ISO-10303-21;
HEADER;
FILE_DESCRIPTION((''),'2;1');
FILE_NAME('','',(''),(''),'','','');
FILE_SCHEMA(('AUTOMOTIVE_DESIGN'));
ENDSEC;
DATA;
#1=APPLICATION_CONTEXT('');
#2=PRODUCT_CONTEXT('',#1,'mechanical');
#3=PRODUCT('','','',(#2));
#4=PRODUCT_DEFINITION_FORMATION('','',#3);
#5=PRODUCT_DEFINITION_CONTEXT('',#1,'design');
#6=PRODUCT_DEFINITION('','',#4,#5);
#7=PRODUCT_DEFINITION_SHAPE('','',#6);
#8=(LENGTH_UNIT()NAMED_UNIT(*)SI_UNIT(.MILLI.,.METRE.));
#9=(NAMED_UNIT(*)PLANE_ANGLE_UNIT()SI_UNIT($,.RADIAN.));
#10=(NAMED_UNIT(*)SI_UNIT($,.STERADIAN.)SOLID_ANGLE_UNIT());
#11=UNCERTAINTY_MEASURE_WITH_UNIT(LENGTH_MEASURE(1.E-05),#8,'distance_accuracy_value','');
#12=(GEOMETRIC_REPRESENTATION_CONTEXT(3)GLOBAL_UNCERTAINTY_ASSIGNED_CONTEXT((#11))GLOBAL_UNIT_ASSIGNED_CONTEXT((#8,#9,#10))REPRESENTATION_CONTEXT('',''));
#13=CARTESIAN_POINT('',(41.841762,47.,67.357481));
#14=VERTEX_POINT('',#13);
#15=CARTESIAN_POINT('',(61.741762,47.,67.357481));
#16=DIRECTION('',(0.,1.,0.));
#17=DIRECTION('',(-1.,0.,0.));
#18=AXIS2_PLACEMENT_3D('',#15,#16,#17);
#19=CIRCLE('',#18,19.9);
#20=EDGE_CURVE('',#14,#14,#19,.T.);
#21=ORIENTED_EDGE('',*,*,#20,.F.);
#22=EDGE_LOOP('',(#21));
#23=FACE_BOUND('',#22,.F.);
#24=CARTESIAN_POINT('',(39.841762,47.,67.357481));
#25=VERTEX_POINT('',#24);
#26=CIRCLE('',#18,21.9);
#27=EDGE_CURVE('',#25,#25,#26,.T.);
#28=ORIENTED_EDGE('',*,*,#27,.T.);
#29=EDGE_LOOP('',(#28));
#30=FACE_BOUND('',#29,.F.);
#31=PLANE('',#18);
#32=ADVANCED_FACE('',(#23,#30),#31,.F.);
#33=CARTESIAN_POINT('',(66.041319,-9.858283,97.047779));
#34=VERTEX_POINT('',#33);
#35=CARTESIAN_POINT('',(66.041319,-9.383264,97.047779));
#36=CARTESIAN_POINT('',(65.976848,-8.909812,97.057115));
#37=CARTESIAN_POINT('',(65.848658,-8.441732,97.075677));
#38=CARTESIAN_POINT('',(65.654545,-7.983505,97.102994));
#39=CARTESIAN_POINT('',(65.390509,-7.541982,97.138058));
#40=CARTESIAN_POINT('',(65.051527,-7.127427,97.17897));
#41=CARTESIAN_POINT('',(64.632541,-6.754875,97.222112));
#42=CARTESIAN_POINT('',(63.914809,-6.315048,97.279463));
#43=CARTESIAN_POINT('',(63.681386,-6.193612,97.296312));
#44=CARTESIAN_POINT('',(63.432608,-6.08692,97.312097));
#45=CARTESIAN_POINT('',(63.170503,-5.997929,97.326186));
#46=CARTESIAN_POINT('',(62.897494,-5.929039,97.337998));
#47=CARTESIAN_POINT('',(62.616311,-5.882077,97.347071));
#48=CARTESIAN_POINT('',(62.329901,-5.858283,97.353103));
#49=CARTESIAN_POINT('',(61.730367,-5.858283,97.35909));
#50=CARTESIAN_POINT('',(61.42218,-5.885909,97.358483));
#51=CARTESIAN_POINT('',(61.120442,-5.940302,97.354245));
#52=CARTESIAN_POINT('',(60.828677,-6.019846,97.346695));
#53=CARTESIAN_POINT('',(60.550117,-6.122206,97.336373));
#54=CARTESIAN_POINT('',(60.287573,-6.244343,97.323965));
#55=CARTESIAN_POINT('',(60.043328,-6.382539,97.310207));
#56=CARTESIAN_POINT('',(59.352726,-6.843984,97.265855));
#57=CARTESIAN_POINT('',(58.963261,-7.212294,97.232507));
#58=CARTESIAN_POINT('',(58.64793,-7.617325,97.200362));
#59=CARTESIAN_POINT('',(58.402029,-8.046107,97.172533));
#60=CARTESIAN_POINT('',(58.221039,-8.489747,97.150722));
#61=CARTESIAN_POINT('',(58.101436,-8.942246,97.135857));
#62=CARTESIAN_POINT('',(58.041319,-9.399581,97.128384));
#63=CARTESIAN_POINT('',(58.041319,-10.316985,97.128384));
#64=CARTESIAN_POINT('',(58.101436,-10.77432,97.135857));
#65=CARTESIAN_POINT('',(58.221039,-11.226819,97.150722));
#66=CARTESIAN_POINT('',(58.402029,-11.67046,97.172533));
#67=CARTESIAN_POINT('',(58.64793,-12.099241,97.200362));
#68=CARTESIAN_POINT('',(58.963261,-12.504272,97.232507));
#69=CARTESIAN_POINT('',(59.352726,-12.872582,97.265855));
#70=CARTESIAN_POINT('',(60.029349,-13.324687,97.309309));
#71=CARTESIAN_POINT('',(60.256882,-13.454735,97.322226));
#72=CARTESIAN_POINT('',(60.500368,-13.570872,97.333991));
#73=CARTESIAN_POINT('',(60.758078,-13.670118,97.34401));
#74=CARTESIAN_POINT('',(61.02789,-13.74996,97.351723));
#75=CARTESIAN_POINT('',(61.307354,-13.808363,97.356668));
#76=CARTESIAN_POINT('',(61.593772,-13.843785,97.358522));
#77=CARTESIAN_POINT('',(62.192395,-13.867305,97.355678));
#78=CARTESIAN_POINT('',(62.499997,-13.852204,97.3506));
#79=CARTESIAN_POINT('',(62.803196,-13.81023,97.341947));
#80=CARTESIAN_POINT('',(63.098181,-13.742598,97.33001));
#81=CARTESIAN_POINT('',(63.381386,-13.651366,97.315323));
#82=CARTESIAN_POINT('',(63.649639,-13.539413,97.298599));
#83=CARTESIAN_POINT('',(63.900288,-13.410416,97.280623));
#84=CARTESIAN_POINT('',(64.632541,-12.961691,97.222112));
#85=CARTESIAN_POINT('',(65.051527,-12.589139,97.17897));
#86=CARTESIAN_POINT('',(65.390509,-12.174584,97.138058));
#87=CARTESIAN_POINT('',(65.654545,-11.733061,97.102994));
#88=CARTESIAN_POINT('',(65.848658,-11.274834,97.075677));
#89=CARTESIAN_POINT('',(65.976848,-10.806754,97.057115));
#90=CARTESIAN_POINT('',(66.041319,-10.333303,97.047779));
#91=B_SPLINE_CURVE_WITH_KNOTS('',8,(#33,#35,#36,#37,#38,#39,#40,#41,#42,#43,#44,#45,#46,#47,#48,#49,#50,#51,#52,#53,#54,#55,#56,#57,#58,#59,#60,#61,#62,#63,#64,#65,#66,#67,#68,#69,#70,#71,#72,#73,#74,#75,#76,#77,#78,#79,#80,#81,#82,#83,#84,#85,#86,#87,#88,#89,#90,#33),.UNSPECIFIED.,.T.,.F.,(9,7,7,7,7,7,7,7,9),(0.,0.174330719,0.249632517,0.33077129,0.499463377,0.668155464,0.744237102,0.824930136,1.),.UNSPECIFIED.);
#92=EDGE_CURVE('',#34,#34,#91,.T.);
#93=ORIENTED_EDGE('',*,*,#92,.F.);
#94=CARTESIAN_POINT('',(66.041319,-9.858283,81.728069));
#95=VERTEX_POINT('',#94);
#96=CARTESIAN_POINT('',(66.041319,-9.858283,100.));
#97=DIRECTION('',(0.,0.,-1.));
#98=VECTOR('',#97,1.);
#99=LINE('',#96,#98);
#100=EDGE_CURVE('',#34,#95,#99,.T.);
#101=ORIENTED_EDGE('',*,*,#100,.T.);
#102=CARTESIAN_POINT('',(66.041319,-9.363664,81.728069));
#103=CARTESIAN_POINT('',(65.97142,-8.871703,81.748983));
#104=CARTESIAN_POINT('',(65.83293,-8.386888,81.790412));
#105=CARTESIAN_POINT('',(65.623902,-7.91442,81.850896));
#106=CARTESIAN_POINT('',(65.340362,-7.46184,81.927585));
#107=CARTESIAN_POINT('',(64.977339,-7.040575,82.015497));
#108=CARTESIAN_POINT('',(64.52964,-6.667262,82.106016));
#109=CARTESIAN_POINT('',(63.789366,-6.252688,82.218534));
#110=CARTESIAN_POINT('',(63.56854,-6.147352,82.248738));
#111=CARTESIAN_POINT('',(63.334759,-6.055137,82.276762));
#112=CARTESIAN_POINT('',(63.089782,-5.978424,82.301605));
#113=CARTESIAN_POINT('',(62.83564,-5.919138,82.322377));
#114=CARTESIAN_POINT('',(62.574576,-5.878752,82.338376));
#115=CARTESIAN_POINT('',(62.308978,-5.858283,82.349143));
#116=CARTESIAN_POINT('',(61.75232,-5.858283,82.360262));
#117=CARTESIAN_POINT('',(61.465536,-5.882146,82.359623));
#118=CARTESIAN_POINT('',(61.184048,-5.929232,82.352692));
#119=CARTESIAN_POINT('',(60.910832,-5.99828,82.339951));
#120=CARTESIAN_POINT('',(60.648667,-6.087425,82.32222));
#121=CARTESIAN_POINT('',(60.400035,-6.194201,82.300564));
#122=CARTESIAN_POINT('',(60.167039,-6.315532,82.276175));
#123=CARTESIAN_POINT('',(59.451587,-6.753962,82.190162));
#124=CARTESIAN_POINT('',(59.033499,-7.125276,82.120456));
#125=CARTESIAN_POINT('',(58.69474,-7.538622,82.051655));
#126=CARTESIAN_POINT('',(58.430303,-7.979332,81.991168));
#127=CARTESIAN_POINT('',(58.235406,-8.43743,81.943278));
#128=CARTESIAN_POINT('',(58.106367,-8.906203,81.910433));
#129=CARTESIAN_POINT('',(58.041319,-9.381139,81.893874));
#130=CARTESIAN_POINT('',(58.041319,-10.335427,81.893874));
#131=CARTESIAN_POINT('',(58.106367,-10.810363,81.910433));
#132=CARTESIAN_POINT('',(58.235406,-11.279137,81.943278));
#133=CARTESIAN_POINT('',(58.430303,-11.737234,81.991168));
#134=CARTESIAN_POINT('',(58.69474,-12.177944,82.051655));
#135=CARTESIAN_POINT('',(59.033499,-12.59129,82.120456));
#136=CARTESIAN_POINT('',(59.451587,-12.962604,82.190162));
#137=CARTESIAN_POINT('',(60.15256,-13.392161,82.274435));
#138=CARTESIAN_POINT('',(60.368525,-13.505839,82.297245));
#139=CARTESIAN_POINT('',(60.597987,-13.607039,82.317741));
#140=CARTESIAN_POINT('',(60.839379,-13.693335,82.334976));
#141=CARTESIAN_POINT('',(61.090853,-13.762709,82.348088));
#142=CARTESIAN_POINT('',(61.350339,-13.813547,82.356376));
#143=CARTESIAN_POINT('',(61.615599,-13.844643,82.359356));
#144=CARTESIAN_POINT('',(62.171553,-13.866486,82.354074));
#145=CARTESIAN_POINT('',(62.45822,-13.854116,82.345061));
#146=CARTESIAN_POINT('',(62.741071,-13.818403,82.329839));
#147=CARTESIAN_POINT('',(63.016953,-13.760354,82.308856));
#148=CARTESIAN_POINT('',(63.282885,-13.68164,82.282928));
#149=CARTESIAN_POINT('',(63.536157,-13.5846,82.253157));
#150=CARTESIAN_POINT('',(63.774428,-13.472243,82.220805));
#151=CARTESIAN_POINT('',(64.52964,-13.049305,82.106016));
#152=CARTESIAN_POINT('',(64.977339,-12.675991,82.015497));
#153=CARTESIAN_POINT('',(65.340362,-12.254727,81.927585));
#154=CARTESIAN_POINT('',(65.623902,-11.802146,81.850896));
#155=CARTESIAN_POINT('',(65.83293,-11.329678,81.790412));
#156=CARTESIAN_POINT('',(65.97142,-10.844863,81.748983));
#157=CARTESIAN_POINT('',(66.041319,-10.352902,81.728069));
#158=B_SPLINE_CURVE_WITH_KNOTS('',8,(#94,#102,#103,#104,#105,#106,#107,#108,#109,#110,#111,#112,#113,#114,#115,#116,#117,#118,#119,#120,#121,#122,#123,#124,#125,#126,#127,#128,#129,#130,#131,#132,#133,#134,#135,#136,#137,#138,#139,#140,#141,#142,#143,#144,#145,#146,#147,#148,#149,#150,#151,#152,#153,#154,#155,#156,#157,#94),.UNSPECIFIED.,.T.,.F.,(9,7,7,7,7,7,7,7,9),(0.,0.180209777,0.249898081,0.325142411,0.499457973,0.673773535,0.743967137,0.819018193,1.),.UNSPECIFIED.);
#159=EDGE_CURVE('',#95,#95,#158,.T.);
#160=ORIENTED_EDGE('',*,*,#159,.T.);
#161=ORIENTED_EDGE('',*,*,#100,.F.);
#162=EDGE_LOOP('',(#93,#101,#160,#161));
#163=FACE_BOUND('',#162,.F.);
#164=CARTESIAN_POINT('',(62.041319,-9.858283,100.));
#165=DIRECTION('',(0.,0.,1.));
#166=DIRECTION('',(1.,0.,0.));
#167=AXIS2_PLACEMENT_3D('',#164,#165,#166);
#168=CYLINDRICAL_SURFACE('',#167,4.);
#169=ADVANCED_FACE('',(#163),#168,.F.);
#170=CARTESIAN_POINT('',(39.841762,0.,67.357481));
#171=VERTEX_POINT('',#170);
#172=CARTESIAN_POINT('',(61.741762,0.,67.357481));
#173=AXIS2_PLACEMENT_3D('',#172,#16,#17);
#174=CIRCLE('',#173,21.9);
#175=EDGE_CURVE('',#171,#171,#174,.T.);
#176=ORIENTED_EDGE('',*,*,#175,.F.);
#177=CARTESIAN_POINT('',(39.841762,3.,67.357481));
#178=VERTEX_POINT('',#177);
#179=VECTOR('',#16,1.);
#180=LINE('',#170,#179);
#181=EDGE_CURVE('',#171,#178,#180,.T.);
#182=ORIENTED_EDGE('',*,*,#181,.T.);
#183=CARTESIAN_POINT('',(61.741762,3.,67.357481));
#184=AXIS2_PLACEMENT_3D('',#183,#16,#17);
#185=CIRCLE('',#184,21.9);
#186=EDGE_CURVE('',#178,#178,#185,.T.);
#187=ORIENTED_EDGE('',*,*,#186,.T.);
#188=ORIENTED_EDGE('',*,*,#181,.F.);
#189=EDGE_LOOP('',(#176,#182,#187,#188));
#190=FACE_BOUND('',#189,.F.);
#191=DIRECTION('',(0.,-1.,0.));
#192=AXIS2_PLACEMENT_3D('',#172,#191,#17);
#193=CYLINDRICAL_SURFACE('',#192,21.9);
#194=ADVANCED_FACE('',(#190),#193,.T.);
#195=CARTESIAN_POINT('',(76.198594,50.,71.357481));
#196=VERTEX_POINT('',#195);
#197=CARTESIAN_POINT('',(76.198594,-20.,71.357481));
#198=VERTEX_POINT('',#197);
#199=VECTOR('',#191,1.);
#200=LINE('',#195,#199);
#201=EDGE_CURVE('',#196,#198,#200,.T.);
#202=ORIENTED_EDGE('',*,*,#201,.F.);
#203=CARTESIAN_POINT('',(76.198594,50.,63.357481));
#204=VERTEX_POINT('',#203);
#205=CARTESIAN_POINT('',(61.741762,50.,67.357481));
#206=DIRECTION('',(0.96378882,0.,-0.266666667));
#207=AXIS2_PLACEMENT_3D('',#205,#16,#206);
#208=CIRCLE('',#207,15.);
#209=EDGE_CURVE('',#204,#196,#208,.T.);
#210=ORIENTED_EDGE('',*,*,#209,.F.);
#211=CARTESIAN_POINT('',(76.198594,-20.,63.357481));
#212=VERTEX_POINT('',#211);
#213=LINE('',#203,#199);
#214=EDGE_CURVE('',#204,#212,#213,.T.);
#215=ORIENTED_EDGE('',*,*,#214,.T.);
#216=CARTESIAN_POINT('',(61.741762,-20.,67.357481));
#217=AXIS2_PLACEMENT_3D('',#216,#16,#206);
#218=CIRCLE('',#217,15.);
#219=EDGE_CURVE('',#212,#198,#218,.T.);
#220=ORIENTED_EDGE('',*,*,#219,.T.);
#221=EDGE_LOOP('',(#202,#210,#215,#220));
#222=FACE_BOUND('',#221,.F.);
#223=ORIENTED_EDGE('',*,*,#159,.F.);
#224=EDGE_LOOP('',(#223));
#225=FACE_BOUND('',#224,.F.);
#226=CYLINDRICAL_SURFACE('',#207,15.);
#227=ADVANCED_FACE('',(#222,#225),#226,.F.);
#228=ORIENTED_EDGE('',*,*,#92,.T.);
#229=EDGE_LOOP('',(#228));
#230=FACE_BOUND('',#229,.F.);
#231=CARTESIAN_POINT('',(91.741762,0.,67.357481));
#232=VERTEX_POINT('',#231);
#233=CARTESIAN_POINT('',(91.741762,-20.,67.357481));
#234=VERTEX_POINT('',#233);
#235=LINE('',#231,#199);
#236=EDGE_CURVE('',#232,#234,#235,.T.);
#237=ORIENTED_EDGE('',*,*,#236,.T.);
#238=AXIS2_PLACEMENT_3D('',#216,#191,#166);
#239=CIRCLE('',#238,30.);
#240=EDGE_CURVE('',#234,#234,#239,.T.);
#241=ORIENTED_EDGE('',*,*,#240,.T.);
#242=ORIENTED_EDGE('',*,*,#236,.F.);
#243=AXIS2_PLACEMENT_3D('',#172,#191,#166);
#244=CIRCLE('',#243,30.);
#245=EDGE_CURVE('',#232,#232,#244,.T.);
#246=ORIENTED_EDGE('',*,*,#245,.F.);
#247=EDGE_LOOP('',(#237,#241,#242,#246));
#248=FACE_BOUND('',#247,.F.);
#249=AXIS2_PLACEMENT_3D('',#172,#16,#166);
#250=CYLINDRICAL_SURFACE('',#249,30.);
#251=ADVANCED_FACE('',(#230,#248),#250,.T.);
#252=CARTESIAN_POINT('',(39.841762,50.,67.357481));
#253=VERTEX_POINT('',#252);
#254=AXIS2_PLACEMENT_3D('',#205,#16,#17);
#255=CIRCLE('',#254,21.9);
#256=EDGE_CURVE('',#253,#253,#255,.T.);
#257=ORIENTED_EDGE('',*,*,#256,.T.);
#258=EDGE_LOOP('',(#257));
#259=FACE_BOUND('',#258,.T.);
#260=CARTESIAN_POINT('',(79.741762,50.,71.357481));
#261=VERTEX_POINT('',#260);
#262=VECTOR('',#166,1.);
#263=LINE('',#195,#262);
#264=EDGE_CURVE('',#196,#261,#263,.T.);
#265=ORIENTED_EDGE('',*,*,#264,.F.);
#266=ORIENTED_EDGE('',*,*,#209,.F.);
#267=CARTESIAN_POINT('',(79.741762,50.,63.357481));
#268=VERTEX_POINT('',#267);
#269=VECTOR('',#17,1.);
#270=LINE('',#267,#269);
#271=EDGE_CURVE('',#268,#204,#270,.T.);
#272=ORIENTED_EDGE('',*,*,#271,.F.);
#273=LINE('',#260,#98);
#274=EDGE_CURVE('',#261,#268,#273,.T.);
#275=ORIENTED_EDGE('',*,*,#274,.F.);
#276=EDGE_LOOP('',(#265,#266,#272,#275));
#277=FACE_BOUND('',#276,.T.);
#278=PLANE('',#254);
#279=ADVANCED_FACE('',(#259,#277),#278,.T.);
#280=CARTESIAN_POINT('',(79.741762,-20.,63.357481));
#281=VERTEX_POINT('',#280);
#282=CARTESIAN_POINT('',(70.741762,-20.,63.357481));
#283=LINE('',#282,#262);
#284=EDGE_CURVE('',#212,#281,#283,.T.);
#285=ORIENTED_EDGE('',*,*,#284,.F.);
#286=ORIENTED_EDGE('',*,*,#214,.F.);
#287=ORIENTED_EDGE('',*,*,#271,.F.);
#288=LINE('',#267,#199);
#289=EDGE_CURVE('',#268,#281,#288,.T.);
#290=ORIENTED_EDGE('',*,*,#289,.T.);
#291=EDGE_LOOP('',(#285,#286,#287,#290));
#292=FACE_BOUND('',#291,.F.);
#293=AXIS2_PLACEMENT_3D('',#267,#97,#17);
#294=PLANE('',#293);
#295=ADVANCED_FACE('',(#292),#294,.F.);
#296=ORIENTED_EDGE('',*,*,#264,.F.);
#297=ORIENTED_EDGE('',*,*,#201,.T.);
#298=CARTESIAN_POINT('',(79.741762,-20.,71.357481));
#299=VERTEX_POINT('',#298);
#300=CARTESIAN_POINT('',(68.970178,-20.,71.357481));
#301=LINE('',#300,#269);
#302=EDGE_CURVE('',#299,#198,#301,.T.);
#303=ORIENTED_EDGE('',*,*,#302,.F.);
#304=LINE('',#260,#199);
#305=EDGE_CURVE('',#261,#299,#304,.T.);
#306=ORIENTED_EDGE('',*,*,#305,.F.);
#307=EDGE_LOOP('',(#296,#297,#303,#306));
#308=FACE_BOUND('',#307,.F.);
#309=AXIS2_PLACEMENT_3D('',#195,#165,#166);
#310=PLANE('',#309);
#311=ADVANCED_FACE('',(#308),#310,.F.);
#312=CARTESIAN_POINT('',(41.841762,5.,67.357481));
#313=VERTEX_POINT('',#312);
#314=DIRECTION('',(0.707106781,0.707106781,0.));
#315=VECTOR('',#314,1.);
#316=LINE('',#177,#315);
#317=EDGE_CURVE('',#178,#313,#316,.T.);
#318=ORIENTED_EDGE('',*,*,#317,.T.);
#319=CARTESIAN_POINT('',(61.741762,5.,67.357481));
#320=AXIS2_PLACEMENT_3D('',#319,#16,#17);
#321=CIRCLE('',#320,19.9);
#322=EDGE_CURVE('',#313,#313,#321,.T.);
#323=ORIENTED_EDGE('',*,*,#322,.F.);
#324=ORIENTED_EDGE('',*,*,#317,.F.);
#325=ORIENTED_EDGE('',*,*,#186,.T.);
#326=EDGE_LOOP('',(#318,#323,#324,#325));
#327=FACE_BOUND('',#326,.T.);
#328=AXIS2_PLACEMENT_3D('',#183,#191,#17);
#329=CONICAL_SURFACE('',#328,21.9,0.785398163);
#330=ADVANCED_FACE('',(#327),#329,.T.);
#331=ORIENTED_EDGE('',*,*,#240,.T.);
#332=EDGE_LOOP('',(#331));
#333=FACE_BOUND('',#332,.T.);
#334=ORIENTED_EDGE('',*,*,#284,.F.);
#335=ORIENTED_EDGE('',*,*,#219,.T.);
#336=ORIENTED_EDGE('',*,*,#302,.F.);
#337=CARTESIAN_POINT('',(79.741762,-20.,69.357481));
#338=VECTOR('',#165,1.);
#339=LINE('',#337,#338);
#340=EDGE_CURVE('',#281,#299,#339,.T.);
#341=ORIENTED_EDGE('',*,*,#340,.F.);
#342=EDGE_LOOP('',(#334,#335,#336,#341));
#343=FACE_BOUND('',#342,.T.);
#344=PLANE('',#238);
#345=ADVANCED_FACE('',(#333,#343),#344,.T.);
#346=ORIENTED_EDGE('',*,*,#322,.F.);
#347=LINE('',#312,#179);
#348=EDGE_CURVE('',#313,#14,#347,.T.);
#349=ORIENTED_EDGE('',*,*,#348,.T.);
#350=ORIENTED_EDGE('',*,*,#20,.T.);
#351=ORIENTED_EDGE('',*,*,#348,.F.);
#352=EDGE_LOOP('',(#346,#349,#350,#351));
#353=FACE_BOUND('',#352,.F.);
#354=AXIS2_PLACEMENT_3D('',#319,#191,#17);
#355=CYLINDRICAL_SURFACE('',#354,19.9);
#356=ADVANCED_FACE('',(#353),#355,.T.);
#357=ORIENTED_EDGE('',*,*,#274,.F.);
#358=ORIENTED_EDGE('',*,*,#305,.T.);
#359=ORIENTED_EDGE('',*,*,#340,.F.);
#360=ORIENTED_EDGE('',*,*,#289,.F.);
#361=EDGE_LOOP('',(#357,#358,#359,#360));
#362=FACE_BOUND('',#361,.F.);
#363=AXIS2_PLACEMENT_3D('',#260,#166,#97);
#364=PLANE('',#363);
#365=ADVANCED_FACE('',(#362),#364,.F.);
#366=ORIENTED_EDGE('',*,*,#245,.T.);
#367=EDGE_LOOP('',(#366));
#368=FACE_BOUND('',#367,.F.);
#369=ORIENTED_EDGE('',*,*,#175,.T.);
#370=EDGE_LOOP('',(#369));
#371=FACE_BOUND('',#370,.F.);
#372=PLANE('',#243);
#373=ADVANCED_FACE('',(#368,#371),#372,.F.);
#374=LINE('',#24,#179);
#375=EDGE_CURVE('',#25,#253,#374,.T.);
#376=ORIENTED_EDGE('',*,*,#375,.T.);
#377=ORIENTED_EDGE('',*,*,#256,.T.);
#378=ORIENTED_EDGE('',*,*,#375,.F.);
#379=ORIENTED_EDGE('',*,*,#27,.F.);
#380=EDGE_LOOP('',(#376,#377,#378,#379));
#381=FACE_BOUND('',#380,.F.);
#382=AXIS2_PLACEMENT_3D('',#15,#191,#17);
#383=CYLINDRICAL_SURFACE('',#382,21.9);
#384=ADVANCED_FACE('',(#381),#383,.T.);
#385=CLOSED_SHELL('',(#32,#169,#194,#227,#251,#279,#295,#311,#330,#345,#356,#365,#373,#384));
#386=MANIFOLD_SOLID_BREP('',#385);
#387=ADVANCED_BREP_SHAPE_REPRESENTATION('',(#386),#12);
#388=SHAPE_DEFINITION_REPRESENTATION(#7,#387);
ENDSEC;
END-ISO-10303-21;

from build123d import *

# Parameters (mm, degrees)
F0_R      = 30
F1_DEPTH  = 20
F2_R      = 21.9
F3_DEPTH  = 5
F4_SIZE   = 2
F5_DEPTH  = 42
F6_R      = 21.9
F6_R_2    = 19.9
F7_DEPTH  = 3
F9_DEPTH  = 74.3
F11_R     = 4
F12_DEPTH = 25


with BuildPart() as f1:
    # F0 (on Front) → F1 (new body)
    with BuildSketch(Plane.XZ):
        with Locations((61.7417618632, 67.357480526)):
            Circle(F0_R)
    extrude(amount=F1_DEPTH)

    # F2 (on face) → F3 (join)
    with BuildSketch(Plane(origin=(0, 0, 0), x_dir=(-1, 0, 0), z_dir=(0, 1, 0))):
        with Locations((-61.7417618632, 67.357480526)):
            Circle(F2_R)
    extrude(amount=F3_DEPTH)

    # F4
    f4_edges = [f1.edges().sort_by_distance(p)[0] for p in [
        (83.641762, 5, 67.357481),
    ]]
    chamfer(f4_edges, length=F4_SIZE)

    # F5 (add): a face of the model
    f5_faces = [f1.faces().sort_by_distance(p)[0] for p in [
        (61.7417618632, 5, 67.357480526),
    ]]
    extrude(f5_faces, amount=F5_DEPTH)

    # F6 (on face) → F7 (join)
    with BuildSketch(Plane(origin=(0, 47, 0), x_dir=(-1, 0, 0), z_dir=(0, 1, 0))):
        with Locations((-61.7417618632, 67.357480526)):
            Circle(F6_R)
        with Locations((-61.7417618632, 67.357480526)):
            Circle(F6_R_2, mode=Mode.SUBTRACT)
        with Locations((-61.7417618632, 67.357480526)):
            Circle(F6_R_2)
    extrude(amount=F7_DEPTH)

    # F8 (on face) → F9 (cut)
    with BuildSketch(Plane(origin=(0, 50, 0), x_dir=(-1, 0, 0), z_dir=(0, 1, 0))):
        with BuildLine():
            Line((-79.7417618632, 63.357480526), (-76.198594158, 63.357480526))
            ThreePointArc((-76.198594158, 63.357480526), (-46.7417618632, 67.357480526), (-76.198594158, 71.357480526))
            Line((-76.198594158, 71.357480526), (-79.7417618632, 71.357480526))
            Line((-79.7417618632, 71.357480526), (-79.7417618632, 67.357480526))
            Line((-79.7417618632, 67.357480526), (-79.7417618632, 63.357480526))
        make_face()
    extrude(amount=-F9_DEPTH, mode=Mode.SUBTRACT)

    # F11 (on offset) → F12 (cut)
    with BuildSketch(Plane.XY.offset(100)):
        with Locations((62.0413188264, -9.8582830757)):
            Circle(F11_R)
    extrude(amount=-F12_DEPTH, mode=Mode.SUBTRACT)


solid = f1.part
